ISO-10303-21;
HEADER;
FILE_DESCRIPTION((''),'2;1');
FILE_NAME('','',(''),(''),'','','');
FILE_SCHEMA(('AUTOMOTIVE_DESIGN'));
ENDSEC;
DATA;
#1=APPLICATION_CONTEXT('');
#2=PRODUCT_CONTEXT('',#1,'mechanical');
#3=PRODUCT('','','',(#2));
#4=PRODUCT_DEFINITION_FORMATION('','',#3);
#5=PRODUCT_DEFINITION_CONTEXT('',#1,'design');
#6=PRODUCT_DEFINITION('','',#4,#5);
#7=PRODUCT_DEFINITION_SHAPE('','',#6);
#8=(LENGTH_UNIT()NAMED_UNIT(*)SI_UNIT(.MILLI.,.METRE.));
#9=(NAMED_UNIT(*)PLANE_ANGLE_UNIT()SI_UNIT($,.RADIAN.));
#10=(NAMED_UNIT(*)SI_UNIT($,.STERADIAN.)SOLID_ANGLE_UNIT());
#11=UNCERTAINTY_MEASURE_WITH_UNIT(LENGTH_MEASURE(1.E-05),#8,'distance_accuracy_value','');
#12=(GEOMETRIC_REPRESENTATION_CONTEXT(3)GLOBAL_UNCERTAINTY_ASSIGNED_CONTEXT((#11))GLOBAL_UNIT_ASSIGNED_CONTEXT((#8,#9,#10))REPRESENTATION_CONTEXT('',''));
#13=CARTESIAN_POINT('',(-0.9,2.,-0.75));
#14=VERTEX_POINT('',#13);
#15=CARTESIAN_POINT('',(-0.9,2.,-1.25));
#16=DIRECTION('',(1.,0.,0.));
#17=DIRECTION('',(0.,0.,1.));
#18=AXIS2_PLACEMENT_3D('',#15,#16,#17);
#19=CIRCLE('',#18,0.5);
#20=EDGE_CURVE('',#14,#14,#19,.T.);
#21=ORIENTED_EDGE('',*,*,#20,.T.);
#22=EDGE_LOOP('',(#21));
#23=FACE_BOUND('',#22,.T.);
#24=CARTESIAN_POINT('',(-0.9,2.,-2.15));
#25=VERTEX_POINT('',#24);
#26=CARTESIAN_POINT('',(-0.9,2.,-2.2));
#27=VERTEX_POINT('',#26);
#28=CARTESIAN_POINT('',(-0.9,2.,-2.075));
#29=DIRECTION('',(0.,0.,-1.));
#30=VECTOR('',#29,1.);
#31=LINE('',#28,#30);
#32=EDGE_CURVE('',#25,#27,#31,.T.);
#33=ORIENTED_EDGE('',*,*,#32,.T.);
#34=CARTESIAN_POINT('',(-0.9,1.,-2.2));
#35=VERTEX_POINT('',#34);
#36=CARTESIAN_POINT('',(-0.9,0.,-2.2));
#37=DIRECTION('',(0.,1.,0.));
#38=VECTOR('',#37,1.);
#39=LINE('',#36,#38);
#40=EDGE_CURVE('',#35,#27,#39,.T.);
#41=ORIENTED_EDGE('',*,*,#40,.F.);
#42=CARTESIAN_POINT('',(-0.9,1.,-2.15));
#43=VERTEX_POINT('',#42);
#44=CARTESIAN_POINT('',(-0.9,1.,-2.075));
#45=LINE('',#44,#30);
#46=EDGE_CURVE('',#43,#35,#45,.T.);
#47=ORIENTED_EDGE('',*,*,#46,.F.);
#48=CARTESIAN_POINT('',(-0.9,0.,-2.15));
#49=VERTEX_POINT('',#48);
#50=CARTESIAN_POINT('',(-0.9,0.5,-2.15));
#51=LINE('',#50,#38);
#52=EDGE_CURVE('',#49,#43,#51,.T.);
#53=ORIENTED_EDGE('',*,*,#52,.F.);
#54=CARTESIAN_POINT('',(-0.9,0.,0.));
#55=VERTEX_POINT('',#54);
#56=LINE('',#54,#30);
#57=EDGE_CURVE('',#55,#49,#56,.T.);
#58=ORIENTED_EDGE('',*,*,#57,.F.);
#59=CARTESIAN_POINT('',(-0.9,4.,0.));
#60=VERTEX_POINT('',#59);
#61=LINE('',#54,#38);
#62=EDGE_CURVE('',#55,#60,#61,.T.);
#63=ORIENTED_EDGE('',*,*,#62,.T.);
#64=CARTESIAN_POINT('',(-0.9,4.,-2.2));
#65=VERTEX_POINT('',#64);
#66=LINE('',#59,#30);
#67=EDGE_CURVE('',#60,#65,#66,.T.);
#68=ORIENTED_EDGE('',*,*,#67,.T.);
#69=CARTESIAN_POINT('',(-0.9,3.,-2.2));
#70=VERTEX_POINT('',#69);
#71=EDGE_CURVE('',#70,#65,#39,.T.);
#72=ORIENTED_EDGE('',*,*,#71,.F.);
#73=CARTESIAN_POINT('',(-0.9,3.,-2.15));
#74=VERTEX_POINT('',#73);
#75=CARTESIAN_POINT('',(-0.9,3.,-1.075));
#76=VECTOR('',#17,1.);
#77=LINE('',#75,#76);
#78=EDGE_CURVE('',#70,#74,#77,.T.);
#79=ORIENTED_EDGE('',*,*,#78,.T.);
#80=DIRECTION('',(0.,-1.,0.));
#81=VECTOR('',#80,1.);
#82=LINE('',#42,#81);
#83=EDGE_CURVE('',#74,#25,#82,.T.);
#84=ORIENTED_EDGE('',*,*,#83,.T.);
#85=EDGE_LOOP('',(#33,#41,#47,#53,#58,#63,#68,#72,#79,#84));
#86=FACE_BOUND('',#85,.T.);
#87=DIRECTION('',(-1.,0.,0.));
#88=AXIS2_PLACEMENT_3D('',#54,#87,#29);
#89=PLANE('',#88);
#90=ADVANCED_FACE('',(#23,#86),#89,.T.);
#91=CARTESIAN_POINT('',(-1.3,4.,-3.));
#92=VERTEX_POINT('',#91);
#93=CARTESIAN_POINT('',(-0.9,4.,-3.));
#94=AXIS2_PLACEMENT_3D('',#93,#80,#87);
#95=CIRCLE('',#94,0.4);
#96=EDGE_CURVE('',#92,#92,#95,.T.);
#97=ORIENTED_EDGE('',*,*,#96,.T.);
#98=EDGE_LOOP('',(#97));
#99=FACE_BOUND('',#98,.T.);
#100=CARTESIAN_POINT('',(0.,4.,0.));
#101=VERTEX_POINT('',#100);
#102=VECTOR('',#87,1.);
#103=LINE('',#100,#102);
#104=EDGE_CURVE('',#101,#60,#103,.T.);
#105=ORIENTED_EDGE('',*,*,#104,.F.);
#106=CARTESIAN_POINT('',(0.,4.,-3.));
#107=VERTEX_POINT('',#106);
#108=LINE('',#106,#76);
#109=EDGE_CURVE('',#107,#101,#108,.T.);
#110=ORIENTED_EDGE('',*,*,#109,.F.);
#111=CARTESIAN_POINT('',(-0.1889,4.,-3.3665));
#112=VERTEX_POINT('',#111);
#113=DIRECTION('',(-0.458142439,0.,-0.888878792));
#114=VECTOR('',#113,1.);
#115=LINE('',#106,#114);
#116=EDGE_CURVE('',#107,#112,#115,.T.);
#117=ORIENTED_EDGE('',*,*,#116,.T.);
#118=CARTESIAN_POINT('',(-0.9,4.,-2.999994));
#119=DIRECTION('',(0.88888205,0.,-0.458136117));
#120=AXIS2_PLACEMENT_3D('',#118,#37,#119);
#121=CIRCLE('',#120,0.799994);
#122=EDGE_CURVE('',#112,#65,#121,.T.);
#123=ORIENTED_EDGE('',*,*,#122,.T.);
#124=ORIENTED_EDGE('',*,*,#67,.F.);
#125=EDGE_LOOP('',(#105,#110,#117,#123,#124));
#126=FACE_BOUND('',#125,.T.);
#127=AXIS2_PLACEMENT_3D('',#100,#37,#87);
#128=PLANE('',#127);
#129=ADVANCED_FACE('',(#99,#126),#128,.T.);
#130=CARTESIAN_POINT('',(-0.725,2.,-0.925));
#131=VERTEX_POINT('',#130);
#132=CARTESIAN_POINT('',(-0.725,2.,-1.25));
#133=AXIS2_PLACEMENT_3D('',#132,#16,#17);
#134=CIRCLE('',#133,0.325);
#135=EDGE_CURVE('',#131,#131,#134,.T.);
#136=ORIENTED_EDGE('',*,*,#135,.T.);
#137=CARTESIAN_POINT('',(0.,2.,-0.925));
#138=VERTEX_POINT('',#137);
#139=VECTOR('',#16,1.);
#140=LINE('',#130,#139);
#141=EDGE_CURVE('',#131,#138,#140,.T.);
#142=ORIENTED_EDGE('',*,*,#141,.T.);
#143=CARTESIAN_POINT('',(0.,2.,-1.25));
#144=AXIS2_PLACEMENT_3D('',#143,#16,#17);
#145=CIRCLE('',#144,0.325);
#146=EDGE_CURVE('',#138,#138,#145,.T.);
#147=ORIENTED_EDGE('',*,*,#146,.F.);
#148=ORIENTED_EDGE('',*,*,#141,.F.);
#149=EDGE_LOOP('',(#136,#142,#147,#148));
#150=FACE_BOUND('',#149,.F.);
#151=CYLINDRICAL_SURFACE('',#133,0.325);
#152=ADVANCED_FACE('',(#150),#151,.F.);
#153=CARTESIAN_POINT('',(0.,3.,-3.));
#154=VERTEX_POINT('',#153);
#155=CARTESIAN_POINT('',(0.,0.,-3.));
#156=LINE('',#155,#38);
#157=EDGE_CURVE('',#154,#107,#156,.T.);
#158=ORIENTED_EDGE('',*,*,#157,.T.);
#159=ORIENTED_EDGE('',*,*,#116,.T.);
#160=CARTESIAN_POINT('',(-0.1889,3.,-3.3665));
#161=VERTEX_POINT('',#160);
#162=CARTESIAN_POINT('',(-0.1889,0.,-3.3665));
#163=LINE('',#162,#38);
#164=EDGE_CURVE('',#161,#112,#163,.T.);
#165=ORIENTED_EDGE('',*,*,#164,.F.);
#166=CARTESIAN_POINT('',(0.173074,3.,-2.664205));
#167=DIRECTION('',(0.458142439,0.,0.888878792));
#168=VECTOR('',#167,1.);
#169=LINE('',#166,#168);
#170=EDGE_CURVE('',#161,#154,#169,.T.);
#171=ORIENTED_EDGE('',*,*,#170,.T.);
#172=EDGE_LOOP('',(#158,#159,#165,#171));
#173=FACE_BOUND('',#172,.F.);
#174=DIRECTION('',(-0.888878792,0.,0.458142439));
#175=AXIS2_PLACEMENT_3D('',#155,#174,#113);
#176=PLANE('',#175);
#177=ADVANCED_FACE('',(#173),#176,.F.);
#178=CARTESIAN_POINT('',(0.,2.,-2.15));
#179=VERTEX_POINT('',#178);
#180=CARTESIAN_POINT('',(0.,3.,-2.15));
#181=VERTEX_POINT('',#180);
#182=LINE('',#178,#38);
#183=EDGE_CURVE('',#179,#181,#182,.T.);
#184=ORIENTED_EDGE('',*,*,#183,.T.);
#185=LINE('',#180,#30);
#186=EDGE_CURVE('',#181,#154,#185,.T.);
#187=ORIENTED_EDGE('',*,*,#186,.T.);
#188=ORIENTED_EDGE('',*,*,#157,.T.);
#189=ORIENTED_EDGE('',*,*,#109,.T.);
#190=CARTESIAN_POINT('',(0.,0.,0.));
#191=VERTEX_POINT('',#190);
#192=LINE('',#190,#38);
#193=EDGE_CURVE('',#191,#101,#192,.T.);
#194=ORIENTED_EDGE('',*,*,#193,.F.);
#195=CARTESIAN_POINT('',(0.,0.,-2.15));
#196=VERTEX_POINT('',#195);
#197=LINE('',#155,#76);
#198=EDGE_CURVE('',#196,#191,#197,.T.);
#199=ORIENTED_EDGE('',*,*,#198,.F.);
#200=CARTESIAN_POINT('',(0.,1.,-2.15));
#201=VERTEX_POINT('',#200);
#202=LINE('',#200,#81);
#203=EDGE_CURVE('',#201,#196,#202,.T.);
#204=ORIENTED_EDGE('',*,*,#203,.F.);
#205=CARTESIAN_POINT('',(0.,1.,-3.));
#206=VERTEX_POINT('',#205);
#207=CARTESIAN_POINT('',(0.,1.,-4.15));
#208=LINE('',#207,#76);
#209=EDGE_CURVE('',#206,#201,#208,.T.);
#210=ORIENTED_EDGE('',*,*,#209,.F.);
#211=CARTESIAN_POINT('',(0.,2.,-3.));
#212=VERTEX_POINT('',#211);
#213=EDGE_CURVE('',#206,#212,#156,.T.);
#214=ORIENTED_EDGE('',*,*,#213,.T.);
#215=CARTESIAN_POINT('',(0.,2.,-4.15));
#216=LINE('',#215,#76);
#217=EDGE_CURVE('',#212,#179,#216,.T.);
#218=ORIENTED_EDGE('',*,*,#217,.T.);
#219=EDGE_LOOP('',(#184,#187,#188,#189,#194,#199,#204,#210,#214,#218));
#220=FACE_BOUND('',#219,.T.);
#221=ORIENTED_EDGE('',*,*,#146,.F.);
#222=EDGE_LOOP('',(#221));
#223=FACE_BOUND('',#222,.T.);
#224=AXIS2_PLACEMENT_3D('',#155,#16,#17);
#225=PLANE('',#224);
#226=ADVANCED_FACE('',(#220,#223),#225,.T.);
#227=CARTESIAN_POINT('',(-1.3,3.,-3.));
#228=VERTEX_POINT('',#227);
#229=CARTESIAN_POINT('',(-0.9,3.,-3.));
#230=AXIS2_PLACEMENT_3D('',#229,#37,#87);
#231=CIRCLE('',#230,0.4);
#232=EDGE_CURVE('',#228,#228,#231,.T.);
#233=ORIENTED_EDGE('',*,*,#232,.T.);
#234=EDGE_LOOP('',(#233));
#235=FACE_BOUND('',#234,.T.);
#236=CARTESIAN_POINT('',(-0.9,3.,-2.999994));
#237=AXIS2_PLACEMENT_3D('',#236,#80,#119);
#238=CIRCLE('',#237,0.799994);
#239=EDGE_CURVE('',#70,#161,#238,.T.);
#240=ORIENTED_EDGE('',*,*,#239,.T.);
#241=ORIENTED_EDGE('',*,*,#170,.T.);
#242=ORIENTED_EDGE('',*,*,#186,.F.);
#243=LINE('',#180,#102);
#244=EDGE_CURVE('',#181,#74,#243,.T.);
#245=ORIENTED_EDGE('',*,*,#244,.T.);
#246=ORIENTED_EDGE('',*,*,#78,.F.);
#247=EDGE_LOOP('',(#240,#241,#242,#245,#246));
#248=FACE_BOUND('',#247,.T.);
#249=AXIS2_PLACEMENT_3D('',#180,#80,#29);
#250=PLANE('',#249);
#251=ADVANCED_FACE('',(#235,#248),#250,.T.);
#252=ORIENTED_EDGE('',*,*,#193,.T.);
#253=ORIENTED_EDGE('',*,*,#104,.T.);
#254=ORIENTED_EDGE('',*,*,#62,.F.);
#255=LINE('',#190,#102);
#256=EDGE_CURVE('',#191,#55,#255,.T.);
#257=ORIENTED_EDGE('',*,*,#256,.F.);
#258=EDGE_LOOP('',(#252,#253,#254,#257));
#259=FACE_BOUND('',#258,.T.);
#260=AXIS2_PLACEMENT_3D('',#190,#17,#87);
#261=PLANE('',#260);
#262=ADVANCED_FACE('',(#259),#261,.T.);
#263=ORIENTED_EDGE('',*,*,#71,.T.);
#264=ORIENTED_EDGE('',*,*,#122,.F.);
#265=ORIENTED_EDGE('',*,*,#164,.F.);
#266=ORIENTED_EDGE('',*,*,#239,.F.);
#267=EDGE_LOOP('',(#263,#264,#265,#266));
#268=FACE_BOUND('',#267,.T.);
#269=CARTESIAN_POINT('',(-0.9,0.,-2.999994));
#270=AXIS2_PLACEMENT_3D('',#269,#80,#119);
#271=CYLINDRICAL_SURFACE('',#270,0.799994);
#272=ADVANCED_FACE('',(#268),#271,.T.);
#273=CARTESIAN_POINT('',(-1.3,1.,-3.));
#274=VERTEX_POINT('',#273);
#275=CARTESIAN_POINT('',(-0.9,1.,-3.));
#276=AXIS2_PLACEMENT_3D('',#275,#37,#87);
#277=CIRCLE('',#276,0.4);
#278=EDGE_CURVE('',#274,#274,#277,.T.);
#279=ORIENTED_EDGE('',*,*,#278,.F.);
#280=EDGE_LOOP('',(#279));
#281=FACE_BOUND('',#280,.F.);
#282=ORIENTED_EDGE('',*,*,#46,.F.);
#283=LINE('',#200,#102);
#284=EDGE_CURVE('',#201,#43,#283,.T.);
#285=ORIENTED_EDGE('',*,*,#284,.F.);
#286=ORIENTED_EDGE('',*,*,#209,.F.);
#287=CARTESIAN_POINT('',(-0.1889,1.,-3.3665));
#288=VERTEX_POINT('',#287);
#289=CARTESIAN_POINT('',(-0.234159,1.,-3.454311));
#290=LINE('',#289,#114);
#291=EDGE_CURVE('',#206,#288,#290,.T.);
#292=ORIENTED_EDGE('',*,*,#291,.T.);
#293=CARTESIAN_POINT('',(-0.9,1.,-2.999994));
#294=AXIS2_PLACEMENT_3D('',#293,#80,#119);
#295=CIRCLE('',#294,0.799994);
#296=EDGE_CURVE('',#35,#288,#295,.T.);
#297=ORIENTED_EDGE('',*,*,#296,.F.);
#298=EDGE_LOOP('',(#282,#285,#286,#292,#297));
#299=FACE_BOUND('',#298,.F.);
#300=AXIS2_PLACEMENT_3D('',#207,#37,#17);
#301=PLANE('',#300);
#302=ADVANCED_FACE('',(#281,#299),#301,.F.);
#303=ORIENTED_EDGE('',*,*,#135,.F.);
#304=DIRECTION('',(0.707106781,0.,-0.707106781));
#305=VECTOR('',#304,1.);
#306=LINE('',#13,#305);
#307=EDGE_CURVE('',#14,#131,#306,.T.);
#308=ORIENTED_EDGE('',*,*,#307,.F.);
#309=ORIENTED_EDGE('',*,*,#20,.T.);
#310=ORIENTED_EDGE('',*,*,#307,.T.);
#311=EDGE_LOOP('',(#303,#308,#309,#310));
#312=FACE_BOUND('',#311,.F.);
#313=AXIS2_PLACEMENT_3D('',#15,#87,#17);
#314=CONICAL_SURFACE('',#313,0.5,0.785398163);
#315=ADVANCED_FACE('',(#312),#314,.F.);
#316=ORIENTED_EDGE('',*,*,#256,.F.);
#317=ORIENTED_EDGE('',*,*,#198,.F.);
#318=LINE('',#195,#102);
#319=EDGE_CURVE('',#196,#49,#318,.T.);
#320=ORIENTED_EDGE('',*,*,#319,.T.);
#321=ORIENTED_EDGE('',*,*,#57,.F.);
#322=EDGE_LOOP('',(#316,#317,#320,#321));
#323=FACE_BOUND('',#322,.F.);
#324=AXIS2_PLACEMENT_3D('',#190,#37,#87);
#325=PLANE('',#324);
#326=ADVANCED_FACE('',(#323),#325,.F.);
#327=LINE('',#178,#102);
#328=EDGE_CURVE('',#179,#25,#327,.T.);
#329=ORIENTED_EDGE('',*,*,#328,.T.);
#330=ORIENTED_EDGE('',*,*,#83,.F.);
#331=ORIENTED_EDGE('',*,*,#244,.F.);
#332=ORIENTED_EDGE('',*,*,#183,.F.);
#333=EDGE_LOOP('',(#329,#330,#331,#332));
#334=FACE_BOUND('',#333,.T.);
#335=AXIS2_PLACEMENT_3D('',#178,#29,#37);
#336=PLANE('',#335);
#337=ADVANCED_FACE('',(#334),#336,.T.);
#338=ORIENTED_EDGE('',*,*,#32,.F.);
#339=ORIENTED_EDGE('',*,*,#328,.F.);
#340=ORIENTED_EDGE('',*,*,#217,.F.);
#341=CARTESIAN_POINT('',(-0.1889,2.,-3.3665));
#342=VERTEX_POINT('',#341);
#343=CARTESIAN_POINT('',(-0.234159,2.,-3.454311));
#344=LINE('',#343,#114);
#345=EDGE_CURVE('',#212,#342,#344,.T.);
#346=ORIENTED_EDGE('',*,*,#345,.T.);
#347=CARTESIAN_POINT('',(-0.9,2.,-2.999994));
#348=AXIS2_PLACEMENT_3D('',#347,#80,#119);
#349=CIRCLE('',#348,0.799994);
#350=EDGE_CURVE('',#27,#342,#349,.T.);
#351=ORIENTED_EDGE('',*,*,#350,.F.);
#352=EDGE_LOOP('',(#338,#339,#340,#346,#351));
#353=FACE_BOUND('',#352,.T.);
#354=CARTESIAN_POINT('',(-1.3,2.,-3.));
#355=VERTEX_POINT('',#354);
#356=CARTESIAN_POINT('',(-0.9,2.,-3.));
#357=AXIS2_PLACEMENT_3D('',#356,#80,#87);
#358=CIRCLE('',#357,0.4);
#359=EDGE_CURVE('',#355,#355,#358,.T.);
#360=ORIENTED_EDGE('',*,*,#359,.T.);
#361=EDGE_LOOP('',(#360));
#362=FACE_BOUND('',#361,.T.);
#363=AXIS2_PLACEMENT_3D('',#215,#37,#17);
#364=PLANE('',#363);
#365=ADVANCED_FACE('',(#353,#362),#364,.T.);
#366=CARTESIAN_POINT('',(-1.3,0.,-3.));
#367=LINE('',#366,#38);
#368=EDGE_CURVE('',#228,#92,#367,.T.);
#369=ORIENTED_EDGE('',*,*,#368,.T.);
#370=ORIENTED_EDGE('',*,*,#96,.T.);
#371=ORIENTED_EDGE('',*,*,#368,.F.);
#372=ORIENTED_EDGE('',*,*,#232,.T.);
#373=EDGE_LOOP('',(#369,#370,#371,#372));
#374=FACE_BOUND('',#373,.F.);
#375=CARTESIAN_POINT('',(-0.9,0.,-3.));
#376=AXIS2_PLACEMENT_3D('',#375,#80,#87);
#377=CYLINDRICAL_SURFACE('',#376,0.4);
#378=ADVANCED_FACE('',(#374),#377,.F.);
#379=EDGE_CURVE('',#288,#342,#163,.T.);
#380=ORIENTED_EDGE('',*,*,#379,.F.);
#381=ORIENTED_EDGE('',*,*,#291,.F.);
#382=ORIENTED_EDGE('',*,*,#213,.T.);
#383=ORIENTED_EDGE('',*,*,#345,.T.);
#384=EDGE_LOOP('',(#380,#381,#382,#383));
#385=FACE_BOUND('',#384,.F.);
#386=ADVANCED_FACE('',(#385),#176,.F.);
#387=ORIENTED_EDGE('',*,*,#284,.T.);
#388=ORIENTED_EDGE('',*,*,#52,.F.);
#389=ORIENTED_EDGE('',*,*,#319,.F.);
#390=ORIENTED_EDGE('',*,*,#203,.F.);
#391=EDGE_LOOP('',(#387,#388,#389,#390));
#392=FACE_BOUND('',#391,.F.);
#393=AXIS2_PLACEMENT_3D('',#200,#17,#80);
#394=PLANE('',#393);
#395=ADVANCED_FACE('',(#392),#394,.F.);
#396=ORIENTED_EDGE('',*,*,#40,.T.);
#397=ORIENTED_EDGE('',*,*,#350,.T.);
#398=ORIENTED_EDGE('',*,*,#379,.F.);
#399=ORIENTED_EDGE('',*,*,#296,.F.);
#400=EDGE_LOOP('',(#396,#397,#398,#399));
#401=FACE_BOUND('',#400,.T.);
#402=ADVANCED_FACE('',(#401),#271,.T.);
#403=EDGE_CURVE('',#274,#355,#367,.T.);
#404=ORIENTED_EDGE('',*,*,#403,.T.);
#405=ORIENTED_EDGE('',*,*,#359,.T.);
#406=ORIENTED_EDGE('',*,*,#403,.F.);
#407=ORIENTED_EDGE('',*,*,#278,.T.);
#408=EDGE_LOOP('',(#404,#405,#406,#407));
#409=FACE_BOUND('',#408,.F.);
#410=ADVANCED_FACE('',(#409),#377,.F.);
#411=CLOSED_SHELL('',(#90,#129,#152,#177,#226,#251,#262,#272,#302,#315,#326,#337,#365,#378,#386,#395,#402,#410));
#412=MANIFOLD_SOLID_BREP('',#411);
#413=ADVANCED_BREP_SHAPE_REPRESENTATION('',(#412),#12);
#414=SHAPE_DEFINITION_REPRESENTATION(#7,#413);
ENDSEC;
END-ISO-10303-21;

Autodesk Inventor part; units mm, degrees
ref_plane "YZ Plane" through (0, 0, 0) normal (1, 0, 0) x (0, 1, 0)
ref_plane "XZ Plane" through (0, 0, 0) normal (0, 1, 0) x (-1, 0, 0)
ref_plane "XY Plane" through (0, 0, 0) normal (0, 0, 1) x (1, 0, 0)
sketch "Skizze1" plane through (0, 0, 0) normal (0, 1, 0) x (-1, 0, 0)
  line L0 (0, 0) -> (0.9, 0)
  line L1 (0.9, 0) -> (0.9, -3)
  line L2 (0.9, -3) -> (0, -3) construction
  line L3 (0, -3) -> (0, 0)
  circle A0 centre (0.9, -3) radius 0.4
  arc A1 (0.1889, -3.3665) -> (0.9, -2.2) centre (0.9, -3) ccw
  line L4 (0, -3) -> (0.1889, -3.3665)
  dimension "d0" = 0.9
  dimension "d2" = 0.8
  dimension "d3" = 1.6
  dimension "d4" = 3
extrude "Extrusion1" add sketch "Skizze1" along normal blind 4
sketch "Skizze2" plane through (0, 0, 0) normal (1, 0, 0) x (0, 0, -1)
  line L0 (3, 0) -> (0, 0) construction
  line L1 (3, 0) -> (3, 4) construction
  line L2 (0, 4) -> (3, 4) construction
  line L3 (0, 0) -> (0, 4) construction
  line L4 (0, 4) -> (3, 4) construction
  line L5 (2.15, 4) -> (2.15, 0) construction
  line L6 (2.15, 0) -> (4.15, 0)
  line L7 (4.15, 0) -> (4.15, 1)
  line L8 (4.15, 1) -> (2.15, 1)
  line L9 (2.15, 1) -> (2.15, 0)
  line L10 (2.15, 3) -> (4.15, 3)
  line L11 (4.15, 3) -> (4.15, 2)
  line L12 (4.15, 2) -> (2.15, 2)
  line L13 (2.15, 2) -> (2.15, 3)
  dimension "d7" = 0.85
  dimension "d8" = 2
  dimension "d9" = 1
  dimension "d10" = 1
  dimension "d11" = 1
extrude "Extrusion2" cut sketch "Skizze2" against normal blind 4
sketch "Skizze4" plane through (-0.9, 0, 0) normal (-1, 0, 0) x (0, 0, 1)
  line L0 (-2.15, 1) -> (-2.15, 0) construction
  line L1 (0, 0) -> (-2.15, 0) construction
  line L2 (0, 0) -> (0, 4) construction
  line L3 (-2.2, 4) -> (0, 4) construction
  line L4 (-2.2, 3) -> (-2.2, 4) construction
  line L5 (-2.2, 3) -> (-2.15, 3) construction
  line L6 (-2.15, 3) -> (-2.15, 2) construction
  line L7 (-2.15, 2) -> (-2.2, 2) construction
  line L8 (-2.2, 1) -> (-2.2, 2) construction
  line L9 (-2.2, 1) -> (-2.15, 1) construction
  line L10 (0, 0) -> (0, 4) construction
  line L11 (0, 2) -> (-2.15, 2) construction
  line L12 (-1.25, 4) -> (-1.25, 0) construction
  point P0 (-1.25, 2)
  dimension "d22" = 1.25
hole "Bohrung2" at (-0.9, 2, -1.25) direction (1, 0, 0) diameter 0.65 end through all countersink diameter 1 countersink angle 90
properties part number "item_scharnier_teil"
